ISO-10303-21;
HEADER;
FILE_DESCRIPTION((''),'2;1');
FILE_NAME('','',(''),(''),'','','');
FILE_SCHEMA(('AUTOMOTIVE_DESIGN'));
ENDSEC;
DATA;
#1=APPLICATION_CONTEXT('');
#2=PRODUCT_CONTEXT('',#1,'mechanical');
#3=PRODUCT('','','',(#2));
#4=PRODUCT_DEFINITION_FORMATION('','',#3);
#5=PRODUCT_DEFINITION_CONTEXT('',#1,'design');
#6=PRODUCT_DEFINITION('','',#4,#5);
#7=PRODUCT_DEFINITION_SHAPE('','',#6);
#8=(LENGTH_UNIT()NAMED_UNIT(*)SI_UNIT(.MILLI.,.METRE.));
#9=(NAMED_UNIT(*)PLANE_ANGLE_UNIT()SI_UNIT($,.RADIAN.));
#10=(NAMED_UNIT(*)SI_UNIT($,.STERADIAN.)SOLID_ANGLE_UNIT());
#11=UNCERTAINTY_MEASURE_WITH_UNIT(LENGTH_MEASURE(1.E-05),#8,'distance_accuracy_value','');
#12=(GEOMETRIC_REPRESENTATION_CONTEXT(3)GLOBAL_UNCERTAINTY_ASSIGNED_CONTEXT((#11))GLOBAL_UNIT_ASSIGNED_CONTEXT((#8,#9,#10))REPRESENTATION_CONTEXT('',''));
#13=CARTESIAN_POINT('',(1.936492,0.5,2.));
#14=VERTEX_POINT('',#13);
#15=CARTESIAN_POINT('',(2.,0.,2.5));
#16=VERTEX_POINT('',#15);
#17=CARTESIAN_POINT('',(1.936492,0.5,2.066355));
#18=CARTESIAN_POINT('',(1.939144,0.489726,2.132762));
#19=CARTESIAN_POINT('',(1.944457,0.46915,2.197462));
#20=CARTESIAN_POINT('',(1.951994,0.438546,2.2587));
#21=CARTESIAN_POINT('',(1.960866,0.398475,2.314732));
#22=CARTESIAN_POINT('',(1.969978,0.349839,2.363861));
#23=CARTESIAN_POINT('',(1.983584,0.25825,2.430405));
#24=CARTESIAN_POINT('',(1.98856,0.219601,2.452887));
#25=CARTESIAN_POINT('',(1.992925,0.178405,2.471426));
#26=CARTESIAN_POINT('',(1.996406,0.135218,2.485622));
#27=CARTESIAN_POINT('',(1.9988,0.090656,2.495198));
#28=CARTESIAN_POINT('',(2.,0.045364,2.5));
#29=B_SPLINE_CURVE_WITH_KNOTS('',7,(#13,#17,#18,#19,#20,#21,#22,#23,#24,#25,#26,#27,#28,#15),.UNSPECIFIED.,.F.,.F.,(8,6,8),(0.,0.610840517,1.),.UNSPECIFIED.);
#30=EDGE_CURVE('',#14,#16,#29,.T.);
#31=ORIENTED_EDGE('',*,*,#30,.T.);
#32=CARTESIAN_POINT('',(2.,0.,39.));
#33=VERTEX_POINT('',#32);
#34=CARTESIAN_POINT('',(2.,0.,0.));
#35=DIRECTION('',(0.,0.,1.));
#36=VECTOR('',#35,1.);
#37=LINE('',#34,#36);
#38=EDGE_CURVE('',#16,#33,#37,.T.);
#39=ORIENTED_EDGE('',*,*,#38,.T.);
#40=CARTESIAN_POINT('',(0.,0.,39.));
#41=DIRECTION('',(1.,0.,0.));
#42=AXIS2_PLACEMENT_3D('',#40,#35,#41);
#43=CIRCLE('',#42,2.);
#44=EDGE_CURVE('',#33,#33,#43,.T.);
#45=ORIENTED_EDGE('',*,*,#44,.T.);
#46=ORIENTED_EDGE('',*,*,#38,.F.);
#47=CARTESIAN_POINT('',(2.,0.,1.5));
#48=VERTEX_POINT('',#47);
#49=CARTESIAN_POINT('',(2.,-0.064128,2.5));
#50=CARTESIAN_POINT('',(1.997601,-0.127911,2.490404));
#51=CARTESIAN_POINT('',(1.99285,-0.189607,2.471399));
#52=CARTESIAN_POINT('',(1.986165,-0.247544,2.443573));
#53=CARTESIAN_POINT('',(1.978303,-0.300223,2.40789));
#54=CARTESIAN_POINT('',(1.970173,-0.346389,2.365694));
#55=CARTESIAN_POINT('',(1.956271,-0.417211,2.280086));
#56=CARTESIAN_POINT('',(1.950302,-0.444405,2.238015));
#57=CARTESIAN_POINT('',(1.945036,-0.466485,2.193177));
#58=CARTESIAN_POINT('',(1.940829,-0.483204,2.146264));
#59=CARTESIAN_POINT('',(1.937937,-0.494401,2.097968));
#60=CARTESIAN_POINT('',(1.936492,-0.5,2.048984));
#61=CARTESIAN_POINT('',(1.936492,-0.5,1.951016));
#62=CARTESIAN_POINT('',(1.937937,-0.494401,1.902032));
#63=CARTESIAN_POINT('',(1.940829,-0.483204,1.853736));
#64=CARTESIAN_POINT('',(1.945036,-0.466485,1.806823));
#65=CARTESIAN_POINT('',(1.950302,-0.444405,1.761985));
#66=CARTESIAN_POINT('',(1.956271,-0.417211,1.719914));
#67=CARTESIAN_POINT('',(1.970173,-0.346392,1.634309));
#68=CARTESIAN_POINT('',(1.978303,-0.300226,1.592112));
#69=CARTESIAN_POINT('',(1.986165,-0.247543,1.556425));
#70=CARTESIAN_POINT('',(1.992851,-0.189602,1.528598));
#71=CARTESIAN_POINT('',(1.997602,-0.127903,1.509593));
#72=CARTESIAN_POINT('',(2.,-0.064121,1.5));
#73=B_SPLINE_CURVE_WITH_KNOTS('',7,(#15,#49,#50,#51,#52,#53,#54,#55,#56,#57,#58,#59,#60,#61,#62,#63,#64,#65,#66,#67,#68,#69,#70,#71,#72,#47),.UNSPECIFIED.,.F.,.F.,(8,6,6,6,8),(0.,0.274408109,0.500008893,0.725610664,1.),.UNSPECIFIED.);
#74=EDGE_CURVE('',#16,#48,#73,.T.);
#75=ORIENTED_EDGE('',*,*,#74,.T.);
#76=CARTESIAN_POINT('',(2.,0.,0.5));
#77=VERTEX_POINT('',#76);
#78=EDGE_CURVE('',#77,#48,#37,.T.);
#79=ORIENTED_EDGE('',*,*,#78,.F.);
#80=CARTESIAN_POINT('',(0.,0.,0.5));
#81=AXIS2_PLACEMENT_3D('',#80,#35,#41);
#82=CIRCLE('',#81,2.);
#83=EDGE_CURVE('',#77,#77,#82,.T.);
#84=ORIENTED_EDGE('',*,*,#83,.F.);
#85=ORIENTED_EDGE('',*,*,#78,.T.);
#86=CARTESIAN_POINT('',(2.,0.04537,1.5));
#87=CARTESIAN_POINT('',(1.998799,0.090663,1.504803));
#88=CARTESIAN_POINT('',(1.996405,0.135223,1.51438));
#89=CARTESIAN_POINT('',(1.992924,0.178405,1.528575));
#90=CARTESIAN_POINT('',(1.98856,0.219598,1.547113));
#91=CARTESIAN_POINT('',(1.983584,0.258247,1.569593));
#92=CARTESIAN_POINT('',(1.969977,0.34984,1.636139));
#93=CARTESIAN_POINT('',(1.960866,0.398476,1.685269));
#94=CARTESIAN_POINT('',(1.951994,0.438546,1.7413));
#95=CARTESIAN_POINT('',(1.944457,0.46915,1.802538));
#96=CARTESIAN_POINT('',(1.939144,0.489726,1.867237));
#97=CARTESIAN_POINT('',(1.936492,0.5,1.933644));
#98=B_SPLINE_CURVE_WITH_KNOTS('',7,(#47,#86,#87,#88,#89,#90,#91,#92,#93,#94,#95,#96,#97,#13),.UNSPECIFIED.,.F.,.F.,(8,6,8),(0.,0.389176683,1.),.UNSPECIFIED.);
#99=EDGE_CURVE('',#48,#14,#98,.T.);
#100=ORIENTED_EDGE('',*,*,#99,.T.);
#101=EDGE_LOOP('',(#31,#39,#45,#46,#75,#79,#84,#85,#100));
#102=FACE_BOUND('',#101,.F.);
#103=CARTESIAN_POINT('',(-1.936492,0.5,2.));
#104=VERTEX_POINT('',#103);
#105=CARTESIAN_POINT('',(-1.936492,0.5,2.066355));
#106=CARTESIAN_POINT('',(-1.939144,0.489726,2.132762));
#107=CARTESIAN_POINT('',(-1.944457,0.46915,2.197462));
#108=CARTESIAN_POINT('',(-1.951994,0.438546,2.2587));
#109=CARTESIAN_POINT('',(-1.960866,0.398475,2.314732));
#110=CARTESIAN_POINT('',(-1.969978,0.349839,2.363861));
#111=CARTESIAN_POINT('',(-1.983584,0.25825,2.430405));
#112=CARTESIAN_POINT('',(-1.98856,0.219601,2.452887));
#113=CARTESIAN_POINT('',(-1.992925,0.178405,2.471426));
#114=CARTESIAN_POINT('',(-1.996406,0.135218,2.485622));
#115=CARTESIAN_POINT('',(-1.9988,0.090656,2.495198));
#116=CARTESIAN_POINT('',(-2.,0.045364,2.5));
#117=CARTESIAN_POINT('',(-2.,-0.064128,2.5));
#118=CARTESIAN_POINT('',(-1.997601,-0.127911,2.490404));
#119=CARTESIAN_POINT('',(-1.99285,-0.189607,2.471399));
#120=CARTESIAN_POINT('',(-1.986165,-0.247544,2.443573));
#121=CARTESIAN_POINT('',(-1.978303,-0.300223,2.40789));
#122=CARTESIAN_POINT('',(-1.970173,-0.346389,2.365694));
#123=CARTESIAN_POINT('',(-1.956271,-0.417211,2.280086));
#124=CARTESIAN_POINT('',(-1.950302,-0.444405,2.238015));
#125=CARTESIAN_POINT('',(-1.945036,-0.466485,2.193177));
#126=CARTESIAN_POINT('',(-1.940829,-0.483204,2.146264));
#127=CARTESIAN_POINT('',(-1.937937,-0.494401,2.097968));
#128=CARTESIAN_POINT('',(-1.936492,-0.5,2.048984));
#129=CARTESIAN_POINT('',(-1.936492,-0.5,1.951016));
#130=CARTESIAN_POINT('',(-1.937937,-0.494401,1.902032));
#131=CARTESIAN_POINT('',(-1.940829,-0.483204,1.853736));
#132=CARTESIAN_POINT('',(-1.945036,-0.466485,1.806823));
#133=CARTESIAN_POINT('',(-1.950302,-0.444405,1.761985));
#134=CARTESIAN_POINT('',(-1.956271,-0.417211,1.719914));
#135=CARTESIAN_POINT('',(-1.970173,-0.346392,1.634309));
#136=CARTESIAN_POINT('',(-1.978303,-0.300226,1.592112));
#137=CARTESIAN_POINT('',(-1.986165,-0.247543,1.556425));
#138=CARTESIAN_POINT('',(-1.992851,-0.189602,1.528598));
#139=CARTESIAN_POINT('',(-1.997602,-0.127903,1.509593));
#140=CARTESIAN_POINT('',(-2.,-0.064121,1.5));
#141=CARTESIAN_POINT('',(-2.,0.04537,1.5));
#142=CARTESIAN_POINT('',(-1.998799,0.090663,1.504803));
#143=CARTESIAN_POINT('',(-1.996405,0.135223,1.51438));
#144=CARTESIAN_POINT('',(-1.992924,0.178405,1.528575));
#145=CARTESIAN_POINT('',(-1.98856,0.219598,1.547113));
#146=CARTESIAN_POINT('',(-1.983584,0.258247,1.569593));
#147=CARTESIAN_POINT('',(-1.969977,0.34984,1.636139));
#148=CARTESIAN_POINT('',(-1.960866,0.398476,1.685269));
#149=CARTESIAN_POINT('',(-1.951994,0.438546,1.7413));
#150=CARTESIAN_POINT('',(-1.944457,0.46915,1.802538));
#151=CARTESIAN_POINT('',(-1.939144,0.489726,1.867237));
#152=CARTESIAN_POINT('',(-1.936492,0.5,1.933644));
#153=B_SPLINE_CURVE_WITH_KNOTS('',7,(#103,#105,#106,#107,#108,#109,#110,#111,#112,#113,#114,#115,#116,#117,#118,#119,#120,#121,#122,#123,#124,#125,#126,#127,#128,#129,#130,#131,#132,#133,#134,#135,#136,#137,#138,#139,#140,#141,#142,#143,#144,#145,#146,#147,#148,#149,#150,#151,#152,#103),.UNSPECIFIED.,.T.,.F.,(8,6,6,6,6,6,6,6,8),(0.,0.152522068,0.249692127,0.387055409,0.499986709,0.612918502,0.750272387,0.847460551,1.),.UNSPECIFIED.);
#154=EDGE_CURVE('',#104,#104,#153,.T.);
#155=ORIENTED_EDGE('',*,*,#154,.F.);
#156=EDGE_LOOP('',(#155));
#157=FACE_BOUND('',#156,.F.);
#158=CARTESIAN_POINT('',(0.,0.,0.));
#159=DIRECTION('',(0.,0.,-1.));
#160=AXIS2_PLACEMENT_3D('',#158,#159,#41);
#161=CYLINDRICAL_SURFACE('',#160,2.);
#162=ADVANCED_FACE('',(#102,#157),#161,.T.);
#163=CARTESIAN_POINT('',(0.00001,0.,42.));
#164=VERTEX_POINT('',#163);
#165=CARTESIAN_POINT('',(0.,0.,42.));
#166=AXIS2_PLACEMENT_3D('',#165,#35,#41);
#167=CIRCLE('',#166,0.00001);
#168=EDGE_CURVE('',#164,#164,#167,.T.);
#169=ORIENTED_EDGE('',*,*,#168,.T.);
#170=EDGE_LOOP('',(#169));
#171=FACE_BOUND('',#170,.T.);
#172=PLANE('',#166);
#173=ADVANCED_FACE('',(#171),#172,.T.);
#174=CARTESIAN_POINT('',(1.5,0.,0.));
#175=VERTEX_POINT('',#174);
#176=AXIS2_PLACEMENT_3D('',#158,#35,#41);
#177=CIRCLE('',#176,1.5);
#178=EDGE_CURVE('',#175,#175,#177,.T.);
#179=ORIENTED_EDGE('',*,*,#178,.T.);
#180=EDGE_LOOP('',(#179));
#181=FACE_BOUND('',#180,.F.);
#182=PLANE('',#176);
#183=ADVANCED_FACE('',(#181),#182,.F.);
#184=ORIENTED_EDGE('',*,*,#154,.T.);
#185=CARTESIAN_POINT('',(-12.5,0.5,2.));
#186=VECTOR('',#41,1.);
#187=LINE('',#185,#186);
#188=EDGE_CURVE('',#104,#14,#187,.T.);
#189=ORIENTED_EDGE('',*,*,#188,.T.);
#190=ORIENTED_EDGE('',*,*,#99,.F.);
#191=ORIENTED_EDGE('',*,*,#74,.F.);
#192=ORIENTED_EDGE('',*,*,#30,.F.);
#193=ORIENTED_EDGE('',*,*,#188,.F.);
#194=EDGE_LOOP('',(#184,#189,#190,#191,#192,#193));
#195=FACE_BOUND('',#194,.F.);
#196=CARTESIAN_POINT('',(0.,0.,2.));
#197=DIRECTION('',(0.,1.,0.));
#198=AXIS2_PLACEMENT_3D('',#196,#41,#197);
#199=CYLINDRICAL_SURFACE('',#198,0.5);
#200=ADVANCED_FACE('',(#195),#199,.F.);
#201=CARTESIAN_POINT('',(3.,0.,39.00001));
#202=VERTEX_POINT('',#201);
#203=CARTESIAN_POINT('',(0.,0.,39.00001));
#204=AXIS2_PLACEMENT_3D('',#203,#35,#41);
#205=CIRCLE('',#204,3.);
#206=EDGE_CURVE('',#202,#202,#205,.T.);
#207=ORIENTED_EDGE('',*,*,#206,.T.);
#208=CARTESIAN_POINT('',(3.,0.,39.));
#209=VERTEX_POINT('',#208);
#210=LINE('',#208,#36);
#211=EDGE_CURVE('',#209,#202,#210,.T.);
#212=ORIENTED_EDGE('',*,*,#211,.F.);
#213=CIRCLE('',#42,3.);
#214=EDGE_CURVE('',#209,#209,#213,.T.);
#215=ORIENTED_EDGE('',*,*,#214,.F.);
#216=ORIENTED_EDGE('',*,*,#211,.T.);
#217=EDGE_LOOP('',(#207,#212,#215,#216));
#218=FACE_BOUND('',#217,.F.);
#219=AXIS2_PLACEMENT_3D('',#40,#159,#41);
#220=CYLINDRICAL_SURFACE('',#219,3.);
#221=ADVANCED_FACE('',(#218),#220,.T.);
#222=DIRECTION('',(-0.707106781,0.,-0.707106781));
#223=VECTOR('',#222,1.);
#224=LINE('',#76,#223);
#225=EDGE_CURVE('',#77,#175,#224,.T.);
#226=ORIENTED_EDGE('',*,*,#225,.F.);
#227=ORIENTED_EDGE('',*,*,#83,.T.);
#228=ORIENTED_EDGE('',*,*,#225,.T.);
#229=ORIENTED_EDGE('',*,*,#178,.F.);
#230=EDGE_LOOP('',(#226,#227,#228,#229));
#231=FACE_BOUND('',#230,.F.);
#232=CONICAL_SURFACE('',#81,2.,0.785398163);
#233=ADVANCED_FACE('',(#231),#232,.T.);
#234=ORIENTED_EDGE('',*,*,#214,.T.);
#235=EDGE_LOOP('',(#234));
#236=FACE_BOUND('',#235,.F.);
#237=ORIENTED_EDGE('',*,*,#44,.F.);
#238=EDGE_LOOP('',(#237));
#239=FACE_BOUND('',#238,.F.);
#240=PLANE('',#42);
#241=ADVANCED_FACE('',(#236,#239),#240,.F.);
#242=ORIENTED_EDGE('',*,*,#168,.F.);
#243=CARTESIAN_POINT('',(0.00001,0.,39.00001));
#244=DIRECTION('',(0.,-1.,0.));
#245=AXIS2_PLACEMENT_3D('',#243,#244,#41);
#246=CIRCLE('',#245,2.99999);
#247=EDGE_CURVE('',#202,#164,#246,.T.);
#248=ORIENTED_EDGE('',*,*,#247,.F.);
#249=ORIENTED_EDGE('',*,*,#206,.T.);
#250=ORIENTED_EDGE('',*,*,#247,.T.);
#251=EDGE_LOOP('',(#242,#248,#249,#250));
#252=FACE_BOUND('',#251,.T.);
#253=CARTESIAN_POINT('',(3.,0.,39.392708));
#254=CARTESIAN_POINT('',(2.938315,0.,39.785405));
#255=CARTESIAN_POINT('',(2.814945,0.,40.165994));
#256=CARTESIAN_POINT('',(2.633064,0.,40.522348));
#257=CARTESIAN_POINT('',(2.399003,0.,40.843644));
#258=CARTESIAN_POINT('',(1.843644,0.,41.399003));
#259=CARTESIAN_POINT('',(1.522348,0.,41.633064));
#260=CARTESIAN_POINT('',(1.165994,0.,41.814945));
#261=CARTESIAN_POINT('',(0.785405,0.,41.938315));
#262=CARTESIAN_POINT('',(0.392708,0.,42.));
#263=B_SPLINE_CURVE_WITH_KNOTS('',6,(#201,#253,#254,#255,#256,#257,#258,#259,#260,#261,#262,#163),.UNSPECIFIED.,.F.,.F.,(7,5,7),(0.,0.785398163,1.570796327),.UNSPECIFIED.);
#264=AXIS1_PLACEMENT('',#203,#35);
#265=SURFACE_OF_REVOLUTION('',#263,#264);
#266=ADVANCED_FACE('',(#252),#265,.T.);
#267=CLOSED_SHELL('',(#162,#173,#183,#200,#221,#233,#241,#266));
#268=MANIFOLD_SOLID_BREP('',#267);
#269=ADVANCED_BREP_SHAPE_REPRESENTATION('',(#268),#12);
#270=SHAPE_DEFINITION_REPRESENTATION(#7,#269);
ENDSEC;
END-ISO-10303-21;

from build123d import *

# Parameters (mm, degrees)
F0_R     = 2
F1_DEPTH = 39
F2_SIZE2 = 0.5
F2_SIZE  = 0.5
F3_R     = 3
F4_DEPTH = 3
F5_R     = 2.99999
F6_R     = 0.5
F7_DEPTH = 12.5


# Not quite as in the source:
# - a fillet or chamfer is up to 0.001 mm smaller than in the source, because OpenCascade refuses the exact size


with BuildPart() as f1:
    # F0 (on Top) → F1 (new body)
    with BuildSketch(Plane.XY):
        Circle(F0_R)
    extrude(amount=F1_DEPTH)

    # F2
    f2_edges = [f1.edges().sort_by_distance(p)[0] for p in [
        (-2, 0, 0),
    ]]
    chamfer(f2_edges, length=F2_SIZE, length2=F2_SIZE2)

    # F3 (on face) → F4 (join)
    with BuildSketch(Plane.XY.offset(39)):
        Circle(F3_R)
    extrude(amount=F4_DEPTH)

    # F5 (radius 3 in the source; OpenCascade refuses exactly that, so slightly less here)
    f5_edges = [f1.edges().sort_by_distance(p)[0] for p in [
        (-3, 0, 42),
    ]]
    fillet(f5_edges, radius=F5_R)

    # F6 (on Right) → F7 (cut, symmetric)
    with BuildSketch(Plane.YZ):
        with Locations((0, 2)):
            Circle(F6_R)
    extrude(amount=F7_DEPTH, both=True, mode=Mode.SUBTRACT)


solid = f1.part
